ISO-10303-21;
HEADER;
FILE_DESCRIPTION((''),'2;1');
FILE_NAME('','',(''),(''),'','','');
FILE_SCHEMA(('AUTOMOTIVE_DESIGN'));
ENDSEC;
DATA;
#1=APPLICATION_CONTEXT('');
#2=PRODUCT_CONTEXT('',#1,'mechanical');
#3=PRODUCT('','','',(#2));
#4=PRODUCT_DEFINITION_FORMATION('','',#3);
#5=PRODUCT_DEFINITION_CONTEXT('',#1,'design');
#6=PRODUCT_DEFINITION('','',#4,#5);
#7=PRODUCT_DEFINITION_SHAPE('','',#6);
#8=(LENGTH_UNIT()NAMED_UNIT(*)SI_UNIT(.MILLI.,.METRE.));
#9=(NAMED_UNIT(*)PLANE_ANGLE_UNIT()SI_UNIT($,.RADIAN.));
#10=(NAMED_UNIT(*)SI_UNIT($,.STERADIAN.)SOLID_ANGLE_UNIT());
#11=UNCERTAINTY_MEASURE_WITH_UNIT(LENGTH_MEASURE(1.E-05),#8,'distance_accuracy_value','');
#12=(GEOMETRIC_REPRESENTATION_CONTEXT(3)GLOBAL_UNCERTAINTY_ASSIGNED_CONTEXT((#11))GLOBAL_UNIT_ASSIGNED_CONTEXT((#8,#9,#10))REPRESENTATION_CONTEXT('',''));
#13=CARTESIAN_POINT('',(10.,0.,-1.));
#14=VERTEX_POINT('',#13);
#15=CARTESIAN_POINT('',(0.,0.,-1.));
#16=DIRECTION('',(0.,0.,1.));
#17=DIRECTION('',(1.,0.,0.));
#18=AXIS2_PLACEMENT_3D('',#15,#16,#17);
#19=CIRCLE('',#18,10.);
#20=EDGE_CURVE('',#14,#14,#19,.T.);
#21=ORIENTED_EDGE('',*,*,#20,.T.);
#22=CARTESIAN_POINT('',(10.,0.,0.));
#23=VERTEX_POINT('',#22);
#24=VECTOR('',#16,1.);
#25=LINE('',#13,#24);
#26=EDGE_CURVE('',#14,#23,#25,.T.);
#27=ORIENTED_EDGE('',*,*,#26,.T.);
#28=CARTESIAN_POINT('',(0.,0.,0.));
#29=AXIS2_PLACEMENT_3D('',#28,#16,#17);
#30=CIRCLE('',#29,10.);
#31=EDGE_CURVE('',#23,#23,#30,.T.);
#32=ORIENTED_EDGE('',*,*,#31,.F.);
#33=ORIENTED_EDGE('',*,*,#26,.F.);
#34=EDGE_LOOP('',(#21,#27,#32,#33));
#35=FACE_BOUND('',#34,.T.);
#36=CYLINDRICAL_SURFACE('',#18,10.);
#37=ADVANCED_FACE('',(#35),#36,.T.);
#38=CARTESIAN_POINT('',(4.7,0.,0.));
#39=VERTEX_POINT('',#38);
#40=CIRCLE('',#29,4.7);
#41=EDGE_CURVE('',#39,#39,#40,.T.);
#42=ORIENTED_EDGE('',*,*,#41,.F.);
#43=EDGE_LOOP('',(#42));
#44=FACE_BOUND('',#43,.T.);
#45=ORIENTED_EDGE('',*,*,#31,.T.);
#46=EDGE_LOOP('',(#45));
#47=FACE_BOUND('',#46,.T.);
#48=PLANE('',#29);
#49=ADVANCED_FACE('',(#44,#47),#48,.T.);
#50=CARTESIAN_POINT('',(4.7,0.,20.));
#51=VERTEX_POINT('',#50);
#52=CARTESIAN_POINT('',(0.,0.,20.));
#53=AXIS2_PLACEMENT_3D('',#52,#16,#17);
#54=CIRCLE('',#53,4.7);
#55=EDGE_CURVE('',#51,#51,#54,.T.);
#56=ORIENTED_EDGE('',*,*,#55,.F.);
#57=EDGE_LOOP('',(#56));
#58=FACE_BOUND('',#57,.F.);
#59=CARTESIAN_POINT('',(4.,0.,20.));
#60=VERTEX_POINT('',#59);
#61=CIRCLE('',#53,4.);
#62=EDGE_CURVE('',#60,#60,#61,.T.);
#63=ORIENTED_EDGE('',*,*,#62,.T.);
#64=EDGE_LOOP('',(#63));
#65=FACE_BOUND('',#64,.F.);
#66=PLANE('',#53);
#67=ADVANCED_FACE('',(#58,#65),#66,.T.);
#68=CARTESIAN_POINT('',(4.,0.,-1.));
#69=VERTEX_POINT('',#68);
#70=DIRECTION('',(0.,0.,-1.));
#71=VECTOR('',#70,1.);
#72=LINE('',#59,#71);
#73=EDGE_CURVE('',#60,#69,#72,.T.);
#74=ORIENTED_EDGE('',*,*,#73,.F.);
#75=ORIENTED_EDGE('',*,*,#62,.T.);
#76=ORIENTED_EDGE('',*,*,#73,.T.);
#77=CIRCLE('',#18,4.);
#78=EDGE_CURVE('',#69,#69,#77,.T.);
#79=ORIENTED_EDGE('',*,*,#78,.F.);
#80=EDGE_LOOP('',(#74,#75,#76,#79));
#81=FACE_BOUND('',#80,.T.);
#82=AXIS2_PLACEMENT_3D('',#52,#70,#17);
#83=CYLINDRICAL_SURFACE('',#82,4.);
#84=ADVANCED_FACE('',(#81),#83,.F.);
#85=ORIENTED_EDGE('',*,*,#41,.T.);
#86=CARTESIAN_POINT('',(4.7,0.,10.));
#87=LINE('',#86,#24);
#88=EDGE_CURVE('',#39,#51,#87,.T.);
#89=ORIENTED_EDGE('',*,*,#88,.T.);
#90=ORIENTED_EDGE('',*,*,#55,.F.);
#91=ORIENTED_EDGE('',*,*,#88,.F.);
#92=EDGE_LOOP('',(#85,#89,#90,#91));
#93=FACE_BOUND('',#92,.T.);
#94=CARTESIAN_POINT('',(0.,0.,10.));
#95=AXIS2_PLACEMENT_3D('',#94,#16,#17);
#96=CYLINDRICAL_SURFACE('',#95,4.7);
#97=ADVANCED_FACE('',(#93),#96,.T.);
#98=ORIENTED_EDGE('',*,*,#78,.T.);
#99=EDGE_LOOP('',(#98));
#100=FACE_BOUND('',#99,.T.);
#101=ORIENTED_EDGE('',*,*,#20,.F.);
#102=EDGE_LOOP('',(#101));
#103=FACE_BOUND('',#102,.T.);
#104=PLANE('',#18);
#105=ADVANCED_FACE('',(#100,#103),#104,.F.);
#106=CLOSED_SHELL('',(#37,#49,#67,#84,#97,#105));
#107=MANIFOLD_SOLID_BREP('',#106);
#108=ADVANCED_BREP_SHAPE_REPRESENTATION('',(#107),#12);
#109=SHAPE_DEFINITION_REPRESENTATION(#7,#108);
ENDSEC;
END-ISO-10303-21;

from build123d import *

# Parameters (mm, degrees)
F0_W = 0.7
F0_H = 20


# Not quite as in the source:
# - a feature of the source that left no trace in its solid (it failed there, or was rolled back) is left out


with BuildPart() as f1:
    # F0 (on Front) → F1 (revolve)
    with BuildSketch(Plane.XZ):
        with Locations((4.35, 10)):
            Rectangle(F0_W, F0_H)
        Polygon((4.7, 0), (4, 0), (4, -1), (10, -1), (10, 0), align=None)
    revolve(axis=Axis((0, 0, 8.0465665087), (0, 0, 1)))


solid = f1.part
